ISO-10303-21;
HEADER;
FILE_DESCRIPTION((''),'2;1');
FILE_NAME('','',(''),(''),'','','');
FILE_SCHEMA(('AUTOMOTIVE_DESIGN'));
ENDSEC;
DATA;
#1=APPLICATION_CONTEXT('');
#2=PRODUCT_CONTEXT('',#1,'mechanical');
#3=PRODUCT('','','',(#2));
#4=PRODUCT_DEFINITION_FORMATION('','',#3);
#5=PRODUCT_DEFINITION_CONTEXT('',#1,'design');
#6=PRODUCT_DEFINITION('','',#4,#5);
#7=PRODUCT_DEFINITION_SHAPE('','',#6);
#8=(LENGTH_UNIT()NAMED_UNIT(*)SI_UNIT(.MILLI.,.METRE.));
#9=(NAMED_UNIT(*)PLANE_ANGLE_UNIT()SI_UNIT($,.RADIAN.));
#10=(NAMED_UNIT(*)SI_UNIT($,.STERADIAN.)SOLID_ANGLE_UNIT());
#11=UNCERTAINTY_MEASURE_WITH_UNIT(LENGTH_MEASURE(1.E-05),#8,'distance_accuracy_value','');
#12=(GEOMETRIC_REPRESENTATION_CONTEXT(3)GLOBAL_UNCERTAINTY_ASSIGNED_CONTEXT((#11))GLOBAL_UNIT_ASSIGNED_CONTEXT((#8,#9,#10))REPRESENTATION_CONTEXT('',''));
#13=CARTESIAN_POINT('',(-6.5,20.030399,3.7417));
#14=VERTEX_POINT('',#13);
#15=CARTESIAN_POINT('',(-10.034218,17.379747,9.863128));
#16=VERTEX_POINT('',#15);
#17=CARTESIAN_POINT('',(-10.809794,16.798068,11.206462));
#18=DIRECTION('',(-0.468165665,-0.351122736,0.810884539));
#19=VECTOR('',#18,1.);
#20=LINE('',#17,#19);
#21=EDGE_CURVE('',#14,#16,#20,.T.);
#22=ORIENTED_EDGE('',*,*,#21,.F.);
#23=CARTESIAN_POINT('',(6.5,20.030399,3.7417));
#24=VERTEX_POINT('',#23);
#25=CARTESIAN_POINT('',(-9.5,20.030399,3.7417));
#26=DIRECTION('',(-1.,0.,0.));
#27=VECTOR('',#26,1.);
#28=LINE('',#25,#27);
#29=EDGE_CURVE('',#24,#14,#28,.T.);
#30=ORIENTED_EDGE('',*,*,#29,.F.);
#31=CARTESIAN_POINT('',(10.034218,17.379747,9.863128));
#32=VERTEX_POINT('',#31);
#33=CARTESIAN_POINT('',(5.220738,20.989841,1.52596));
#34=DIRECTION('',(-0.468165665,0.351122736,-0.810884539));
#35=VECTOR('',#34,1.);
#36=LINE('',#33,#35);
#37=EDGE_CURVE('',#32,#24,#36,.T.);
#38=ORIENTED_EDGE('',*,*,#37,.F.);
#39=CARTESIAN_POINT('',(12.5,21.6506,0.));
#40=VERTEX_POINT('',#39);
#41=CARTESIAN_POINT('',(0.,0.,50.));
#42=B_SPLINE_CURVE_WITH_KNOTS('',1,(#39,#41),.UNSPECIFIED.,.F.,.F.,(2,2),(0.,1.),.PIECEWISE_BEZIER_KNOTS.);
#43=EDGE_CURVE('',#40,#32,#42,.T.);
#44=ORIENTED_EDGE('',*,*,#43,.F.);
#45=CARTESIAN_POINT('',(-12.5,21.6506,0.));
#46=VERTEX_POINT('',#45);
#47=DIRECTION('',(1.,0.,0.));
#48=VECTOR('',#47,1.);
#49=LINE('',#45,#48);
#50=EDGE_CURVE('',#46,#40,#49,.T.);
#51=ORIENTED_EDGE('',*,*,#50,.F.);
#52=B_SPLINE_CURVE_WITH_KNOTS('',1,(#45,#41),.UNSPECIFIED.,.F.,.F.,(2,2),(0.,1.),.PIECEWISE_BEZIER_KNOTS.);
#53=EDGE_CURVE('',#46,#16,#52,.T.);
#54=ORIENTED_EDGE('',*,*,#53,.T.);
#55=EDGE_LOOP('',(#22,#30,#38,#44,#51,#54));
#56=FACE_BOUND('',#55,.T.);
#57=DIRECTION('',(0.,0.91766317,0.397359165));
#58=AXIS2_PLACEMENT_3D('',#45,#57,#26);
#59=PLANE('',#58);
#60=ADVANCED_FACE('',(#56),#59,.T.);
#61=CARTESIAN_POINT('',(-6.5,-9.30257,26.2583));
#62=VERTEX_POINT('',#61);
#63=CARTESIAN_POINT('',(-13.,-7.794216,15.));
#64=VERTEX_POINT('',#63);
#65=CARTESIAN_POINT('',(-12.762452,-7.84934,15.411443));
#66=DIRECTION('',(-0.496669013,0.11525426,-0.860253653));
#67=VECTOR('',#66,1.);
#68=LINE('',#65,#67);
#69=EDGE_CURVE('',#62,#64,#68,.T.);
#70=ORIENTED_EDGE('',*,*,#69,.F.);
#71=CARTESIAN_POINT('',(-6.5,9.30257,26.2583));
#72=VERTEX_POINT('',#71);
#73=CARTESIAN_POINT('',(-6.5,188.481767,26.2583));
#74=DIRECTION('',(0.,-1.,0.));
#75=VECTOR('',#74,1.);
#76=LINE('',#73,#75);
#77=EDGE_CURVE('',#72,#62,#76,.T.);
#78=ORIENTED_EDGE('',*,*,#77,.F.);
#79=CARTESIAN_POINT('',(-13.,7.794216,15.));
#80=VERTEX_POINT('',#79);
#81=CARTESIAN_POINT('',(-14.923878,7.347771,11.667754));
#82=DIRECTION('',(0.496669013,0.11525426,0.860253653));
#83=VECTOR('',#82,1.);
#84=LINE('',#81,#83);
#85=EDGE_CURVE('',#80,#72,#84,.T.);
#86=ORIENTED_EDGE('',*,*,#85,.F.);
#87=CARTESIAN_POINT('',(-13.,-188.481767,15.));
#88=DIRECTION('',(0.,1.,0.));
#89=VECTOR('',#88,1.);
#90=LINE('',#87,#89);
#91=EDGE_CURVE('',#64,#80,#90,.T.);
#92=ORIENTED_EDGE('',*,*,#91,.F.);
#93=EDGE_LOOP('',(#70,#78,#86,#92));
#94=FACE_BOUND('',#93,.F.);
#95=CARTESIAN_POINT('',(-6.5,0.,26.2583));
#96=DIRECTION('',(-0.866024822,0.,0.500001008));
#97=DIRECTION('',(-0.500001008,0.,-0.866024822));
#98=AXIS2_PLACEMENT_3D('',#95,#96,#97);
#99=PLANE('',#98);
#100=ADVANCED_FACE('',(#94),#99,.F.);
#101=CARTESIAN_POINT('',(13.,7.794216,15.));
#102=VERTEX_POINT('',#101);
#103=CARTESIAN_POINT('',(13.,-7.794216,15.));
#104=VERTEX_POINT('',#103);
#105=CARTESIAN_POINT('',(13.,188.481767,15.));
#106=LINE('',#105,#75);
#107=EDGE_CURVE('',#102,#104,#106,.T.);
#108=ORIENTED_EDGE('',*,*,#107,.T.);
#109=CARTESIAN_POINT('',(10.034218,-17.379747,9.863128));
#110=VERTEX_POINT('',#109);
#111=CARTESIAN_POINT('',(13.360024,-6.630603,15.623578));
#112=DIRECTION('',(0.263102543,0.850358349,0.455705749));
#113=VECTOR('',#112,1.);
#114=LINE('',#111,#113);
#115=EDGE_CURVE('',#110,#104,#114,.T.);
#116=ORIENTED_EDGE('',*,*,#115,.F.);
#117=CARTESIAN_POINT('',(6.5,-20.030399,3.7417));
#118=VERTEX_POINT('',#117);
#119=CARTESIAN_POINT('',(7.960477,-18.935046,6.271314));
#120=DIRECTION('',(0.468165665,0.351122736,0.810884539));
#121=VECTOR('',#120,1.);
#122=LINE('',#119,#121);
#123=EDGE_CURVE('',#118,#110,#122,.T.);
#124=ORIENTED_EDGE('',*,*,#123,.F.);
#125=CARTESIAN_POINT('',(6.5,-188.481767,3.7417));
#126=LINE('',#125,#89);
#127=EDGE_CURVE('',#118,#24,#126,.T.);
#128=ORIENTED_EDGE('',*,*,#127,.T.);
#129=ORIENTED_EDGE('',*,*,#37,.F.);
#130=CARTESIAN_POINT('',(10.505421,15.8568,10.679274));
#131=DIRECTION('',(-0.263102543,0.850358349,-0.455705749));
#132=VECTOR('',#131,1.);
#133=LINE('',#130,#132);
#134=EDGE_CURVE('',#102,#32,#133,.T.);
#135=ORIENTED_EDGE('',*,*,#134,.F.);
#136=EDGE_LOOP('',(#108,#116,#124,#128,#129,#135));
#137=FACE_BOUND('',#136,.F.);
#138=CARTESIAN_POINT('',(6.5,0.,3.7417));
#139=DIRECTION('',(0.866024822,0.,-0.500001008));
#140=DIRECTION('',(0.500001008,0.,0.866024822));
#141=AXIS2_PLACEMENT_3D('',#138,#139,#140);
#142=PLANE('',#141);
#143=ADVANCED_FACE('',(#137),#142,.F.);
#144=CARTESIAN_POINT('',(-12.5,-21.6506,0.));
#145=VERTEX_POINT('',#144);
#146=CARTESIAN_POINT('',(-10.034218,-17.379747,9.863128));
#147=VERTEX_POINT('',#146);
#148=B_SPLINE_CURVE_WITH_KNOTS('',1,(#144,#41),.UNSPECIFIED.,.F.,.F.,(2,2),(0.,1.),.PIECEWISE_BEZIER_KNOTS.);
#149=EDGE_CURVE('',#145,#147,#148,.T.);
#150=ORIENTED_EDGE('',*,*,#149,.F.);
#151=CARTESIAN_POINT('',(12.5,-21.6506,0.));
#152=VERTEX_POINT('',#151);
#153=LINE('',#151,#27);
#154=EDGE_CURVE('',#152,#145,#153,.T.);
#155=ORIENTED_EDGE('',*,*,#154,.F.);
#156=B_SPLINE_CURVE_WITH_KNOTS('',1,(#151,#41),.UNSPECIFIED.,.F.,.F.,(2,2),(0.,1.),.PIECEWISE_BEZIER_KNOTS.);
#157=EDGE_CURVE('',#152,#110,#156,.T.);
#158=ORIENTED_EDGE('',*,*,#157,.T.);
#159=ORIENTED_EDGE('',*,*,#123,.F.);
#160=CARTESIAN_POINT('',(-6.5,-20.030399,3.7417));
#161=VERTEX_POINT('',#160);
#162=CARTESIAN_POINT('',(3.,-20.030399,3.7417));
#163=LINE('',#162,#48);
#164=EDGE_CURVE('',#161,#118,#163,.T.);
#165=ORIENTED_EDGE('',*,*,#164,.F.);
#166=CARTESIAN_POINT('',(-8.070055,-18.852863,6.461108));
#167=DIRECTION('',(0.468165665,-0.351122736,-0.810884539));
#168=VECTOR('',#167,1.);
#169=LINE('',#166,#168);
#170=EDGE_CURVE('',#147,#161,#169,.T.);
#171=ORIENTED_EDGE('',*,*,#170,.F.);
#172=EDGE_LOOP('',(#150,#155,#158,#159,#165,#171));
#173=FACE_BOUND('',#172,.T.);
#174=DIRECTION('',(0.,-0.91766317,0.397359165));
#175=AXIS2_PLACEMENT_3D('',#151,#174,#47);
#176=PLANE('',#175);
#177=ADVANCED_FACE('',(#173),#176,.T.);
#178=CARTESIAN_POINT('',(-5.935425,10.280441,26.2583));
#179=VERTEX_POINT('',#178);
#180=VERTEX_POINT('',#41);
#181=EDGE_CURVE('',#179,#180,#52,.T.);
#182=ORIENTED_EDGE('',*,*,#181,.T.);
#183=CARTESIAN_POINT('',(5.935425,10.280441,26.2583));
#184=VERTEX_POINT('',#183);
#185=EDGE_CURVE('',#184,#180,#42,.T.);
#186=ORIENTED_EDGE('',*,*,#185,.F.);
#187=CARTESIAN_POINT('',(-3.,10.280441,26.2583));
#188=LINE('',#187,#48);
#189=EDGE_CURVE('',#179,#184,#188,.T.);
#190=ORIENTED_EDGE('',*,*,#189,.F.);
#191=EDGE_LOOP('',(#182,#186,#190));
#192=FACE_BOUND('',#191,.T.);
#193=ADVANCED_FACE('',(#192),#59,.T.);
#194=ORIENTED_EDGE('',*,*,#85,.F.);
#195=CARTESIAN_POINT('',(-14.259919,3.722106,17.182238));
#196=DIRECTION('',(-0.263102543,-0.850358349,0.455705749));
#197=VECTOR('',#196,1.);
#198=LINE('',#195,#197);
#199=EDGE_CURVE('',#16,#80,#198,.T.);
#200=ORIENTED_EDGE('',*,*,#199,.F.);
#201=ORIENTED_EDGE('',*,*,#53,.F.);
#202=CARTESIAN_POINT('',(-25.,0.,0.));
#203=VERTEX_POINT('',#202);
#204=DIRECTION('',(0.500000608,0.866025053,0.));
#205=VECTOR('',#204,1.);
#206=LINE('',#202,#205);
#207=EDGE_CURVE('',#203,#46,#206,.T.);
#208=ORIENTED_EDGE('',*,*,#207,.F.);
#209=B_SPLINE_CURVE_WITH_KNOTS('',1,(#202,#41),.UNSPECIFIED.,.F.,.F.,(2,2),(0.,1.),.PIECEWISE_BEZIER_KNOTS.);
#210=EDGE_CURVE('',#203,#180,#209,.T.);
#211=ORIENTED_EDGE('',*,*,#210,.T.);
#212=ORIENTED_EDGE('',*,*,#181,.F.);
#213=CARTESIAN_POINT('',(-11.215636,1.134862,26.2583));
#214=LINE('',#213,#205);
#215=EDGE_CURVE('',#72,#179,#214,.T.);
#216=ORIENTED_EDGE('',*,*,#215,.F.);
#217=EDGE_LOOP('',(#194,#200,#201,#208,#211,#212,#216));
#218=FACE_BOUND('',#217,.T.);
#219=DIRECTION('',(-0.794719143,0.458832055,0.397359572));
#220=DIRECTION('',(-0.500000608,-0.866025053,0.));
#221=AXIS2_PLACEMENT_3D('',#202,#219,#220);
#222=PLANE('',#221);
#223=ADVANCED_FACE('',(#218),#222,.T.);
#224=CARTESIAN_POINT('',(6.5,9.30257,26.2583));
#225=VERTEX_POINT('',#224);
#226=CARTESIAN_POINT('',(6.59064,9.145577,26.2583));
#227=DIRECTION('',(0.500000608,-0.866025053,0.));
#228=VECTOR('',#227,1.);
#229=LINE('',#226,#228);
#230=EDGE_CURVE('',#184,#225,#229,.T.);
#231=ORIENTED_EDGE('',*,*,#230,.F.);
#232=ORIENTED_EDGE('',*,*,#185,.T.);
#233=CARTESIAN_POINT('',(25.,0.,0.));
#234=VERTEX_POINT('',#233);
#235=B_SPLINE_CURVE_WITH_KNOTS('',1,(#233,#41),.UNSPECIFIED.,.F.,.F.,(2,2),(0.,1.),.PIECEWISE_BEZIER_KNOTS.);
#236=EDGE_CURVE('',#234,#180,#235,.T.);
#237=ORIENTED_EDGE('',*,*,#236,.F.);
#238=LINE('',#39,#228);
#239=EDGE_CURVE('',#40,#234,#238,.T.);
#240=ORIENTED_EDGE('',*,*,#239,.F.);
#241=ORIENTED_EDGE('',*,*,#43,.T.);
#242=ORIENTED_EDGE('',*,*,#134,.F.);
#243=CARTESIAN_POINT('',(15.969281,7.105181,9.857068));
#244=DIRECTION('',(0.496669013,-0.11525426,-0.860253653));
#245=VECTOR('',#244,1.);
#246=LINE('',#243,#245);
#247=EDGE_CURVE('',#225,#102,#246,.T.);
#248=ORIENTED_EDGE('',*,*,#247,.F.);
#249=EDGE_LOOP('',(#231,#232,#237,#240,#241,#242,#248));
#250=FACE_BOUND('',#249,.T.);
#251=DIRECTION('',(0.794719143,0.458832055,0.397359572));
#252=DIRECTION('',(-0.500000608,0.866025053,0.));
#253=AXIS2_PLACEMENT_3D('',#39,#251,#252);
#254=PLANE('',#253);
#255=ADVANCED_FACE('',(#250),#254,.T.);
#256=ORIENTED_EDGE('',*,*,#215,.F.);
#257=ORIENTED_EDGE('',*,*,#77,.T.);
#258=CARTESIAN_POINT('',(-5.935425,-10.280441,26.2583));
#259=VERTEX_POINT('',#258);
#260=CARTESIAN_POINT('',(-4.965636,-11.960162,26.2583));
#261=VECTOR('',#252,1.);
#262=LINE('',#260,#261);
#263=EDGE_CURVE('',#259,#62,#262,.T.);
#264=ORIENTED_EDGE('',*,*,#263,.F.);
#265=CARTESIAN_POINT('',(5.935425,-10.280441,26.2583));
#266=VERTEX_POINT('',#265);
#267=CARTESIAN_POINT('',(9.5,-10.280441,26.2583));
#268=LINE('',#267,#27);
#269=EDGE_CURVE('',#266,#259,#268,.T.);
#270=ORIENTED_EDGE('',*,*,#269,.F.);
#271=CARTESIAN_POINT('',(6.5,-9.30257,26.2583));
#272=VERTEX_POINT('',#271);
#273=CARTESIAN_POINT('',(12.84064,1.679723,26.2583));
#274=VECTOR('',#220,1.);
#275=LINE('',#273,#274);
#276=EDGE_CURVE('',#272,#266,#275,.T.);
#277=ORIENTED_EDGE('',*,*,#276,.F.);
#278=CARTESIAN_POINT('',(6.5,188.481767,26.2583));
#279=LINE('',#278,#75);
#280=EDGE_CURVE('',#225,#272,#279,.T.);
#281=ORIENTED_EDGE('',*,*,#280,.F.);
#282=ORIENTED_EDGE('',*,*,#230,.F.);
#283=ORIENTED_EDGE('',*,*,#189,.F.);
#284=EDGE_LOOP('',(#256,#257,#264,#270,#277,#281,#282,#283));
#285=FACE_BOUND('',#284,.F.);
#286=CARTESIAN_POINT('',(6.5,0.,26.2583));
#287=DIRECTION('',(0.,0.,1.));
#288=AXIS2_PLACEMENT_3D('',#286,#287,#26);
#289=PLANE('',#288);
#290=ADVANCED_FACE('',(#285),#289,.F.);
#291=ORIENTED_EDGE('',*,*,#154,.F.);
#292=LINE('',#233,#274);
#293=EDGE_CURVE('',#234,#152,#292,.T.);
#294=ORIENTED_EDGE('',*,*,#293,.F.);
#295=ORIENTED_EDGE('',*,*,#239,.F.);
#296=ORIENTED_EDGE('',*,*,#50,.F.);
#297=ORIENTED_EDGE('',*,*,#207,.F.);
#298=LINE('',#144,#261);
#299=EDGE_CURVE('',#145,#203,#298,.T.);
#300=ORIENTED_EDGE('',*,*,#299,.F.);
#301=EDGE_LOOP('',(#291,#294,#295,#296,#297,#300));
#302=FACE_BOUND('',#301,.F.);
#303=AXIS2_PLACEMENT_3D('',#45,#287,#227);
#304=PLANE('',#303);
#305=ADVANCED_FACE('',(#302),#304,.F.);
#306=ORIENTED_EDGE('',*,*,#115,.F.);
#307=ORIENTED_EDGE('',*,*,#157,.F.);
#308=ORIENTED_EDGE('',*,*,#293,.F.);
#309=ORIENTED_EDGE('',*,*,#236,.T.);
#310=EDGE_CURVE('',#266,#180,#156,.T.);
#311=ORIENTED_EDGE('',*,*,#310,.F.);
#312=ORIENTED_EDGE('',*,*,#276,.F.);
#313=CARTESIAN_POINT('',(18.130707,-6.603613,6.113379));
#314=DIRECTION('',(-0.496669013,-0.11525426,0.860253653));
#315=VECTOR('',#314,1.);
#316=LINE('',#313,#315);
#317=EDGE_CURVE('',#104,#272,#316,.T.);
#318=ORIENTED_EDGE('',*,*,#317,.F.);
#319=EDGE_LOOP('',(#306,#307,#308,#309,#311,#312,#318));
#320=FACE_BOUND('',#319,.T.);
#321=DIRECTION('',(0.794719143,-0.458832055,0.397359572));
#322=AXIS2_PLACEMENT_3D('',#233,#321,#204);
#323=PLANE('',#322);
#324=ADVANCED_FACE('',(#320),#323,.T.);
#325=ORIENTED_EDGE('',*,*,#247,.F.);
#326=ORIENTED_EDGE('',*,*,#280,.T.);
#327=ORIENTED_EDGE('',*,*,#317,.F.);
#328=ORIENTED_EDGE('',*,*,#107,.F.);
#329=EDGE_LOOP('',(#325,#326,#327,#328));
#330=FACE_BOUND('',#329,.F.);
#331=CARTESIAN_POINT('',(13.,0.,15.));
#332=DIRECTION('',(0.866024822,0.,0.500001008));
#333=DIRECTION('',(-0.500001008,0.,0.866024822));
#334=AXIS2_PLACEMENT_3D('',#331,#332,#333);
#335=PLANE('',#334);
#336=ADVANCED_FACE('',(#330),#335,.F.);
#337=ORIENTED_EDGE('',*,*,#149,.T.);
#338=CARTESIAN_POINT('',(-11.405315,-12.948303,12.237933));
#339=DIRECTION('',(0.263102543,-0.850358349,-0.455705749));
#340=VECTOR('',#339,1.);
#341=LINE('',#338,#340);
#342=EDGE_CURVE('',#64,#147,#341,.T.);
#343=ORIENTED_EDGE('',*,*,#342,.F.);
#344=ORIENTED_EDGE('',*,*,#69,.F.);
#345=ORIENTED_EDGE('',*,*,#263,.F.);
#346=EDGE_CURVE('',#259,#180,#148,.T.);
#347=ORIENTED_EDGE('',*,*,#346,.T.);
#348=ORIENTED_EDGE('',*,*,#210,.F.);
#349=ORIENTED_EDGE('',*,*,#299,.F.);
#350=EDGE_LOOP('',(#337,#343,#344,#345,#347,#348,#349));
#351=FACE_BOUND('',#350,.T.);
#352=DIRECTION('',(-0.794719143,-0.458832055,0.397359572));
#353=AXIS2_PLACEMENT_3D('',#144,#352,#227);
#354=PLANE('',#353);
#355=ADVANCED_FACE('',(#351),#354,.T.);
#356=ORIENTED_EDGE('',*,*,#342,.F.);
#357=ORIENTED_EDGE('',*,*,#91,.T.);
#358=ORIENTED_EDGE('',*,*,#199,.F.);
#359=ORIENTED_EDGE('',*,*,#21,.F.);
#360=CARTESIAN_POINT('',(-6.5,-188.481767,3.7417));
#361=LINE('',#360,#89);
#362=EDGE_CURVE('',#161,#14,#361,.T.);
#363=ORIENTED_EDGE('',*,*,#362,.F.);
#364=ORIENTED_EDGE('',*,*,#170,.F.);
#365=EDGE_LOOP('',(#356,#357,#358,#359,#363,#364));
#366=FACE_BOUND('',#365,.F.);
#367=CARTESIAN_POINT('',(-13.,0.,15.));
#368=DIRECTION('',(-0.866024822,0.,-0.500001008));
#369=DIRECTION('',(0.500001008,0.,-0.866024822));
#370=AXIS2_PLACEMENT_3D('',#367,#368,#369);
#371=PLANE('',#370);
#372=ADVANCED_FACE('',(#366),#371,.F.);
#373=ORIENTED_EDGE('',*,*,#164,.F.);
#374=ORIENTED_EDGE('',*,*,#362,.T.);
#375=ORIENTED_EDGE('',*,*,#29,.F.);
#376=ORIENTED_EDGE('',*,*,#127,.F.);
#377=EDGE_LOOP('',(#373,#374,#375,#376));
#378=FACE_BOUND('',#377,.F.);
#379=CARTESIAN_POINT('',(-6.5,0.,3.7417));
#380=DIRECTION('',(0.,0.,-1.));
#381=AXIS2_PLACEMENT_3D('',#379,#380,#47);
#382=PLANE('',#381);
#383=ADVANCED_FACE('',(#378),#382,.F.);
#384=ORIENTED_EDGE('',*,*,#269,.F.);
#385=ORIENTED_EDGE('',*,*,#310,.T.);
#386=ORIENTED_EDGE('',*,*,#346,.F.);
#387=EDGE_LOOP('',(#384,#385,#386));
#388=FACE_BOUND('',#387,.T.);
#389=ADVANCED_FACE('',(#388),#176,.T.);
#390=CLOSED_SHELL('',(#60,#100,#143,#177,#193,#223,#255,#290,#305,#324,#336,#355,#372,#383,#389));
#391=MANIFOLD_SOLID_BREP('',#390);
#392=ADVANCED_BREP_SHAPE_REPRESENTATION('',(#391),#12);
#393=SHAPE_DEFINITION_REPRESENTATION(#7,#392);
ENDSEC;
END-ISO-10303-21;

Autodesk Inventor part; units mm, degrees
ref_plane "YZ Plane" through (0, 0, 0) normal (1, 0, 0) x (0, 1, 0)
ref_plane "XZ Plane" through (0, 0, 0) normal (0, 1, 0) x (-1, 0, 0)
sketch "Эскиз1" plane through (0, 0, 0) normal (0, 0, 1) x (1, 0, 0)
  line L0 (-12.5, 21.6506) -> (12.5, 21.6506)
  line L1 (12.5, 21.6506) -> (25, 0)
  line L2 (25, 0) -> (12.5, -21.6506)
  line L3 (12.5, -21.6506) -> (-12.5, -21.6506)
  line L4 (-12.5, -21.6506) -> (-25, 0)
  line L5 (-25, 0) -> (-12.5, 21.6506)
  point P0 (0, 0)
  point P1 (0, 0)
  dimension "d0" = 50
ref_plane "РабПлоскость1" through (0, 0, 50) normal (0, 0, 1) x (1, 0, 0)
sketch "Эскиз2" plane through (0, 0, 50) normal (0, 0, 1) x (1, 0, 0)
  point P0 (0, 0)
  point P1 (0, 0)
loft "Лофт1" add profiles "Эскиз1" section 2 point at (0, 0, 50)
sketch "Эскиз3" plane through (0, 0, 0) normal (0, 1, 0) x (-1, 0, 0)
  line L0 (-6.5, 3.7417) -> (-13, 15)
  line L1 (-13, 15) -> (-6.5, 26.2583)
  line L2 (-6.5, 26.2583) -> (6.5, 26.2583)
  line L3 (6.5, 26.2583) -> (13, 15)
  line L4 (13, 15) -> (6.5, 3.7417)
  line L5 (6.5, 3.7417) -> (-6.5, 3.7417)
  line L6 (-12.5, 0) -> (12.5, 0) projected
  point P0 (0, 0)
  point P1 (0, 15)
  point P2 (0, 0)
  dimension "d6" = 26
  dimension "d7" = 15
extrude "Выдавливание1" cut sketch "Эскиз3" along normal through all both and the other way through all
properties part number "пирамида лаба" material "Сталь, высокопрочная, низколегированная"
